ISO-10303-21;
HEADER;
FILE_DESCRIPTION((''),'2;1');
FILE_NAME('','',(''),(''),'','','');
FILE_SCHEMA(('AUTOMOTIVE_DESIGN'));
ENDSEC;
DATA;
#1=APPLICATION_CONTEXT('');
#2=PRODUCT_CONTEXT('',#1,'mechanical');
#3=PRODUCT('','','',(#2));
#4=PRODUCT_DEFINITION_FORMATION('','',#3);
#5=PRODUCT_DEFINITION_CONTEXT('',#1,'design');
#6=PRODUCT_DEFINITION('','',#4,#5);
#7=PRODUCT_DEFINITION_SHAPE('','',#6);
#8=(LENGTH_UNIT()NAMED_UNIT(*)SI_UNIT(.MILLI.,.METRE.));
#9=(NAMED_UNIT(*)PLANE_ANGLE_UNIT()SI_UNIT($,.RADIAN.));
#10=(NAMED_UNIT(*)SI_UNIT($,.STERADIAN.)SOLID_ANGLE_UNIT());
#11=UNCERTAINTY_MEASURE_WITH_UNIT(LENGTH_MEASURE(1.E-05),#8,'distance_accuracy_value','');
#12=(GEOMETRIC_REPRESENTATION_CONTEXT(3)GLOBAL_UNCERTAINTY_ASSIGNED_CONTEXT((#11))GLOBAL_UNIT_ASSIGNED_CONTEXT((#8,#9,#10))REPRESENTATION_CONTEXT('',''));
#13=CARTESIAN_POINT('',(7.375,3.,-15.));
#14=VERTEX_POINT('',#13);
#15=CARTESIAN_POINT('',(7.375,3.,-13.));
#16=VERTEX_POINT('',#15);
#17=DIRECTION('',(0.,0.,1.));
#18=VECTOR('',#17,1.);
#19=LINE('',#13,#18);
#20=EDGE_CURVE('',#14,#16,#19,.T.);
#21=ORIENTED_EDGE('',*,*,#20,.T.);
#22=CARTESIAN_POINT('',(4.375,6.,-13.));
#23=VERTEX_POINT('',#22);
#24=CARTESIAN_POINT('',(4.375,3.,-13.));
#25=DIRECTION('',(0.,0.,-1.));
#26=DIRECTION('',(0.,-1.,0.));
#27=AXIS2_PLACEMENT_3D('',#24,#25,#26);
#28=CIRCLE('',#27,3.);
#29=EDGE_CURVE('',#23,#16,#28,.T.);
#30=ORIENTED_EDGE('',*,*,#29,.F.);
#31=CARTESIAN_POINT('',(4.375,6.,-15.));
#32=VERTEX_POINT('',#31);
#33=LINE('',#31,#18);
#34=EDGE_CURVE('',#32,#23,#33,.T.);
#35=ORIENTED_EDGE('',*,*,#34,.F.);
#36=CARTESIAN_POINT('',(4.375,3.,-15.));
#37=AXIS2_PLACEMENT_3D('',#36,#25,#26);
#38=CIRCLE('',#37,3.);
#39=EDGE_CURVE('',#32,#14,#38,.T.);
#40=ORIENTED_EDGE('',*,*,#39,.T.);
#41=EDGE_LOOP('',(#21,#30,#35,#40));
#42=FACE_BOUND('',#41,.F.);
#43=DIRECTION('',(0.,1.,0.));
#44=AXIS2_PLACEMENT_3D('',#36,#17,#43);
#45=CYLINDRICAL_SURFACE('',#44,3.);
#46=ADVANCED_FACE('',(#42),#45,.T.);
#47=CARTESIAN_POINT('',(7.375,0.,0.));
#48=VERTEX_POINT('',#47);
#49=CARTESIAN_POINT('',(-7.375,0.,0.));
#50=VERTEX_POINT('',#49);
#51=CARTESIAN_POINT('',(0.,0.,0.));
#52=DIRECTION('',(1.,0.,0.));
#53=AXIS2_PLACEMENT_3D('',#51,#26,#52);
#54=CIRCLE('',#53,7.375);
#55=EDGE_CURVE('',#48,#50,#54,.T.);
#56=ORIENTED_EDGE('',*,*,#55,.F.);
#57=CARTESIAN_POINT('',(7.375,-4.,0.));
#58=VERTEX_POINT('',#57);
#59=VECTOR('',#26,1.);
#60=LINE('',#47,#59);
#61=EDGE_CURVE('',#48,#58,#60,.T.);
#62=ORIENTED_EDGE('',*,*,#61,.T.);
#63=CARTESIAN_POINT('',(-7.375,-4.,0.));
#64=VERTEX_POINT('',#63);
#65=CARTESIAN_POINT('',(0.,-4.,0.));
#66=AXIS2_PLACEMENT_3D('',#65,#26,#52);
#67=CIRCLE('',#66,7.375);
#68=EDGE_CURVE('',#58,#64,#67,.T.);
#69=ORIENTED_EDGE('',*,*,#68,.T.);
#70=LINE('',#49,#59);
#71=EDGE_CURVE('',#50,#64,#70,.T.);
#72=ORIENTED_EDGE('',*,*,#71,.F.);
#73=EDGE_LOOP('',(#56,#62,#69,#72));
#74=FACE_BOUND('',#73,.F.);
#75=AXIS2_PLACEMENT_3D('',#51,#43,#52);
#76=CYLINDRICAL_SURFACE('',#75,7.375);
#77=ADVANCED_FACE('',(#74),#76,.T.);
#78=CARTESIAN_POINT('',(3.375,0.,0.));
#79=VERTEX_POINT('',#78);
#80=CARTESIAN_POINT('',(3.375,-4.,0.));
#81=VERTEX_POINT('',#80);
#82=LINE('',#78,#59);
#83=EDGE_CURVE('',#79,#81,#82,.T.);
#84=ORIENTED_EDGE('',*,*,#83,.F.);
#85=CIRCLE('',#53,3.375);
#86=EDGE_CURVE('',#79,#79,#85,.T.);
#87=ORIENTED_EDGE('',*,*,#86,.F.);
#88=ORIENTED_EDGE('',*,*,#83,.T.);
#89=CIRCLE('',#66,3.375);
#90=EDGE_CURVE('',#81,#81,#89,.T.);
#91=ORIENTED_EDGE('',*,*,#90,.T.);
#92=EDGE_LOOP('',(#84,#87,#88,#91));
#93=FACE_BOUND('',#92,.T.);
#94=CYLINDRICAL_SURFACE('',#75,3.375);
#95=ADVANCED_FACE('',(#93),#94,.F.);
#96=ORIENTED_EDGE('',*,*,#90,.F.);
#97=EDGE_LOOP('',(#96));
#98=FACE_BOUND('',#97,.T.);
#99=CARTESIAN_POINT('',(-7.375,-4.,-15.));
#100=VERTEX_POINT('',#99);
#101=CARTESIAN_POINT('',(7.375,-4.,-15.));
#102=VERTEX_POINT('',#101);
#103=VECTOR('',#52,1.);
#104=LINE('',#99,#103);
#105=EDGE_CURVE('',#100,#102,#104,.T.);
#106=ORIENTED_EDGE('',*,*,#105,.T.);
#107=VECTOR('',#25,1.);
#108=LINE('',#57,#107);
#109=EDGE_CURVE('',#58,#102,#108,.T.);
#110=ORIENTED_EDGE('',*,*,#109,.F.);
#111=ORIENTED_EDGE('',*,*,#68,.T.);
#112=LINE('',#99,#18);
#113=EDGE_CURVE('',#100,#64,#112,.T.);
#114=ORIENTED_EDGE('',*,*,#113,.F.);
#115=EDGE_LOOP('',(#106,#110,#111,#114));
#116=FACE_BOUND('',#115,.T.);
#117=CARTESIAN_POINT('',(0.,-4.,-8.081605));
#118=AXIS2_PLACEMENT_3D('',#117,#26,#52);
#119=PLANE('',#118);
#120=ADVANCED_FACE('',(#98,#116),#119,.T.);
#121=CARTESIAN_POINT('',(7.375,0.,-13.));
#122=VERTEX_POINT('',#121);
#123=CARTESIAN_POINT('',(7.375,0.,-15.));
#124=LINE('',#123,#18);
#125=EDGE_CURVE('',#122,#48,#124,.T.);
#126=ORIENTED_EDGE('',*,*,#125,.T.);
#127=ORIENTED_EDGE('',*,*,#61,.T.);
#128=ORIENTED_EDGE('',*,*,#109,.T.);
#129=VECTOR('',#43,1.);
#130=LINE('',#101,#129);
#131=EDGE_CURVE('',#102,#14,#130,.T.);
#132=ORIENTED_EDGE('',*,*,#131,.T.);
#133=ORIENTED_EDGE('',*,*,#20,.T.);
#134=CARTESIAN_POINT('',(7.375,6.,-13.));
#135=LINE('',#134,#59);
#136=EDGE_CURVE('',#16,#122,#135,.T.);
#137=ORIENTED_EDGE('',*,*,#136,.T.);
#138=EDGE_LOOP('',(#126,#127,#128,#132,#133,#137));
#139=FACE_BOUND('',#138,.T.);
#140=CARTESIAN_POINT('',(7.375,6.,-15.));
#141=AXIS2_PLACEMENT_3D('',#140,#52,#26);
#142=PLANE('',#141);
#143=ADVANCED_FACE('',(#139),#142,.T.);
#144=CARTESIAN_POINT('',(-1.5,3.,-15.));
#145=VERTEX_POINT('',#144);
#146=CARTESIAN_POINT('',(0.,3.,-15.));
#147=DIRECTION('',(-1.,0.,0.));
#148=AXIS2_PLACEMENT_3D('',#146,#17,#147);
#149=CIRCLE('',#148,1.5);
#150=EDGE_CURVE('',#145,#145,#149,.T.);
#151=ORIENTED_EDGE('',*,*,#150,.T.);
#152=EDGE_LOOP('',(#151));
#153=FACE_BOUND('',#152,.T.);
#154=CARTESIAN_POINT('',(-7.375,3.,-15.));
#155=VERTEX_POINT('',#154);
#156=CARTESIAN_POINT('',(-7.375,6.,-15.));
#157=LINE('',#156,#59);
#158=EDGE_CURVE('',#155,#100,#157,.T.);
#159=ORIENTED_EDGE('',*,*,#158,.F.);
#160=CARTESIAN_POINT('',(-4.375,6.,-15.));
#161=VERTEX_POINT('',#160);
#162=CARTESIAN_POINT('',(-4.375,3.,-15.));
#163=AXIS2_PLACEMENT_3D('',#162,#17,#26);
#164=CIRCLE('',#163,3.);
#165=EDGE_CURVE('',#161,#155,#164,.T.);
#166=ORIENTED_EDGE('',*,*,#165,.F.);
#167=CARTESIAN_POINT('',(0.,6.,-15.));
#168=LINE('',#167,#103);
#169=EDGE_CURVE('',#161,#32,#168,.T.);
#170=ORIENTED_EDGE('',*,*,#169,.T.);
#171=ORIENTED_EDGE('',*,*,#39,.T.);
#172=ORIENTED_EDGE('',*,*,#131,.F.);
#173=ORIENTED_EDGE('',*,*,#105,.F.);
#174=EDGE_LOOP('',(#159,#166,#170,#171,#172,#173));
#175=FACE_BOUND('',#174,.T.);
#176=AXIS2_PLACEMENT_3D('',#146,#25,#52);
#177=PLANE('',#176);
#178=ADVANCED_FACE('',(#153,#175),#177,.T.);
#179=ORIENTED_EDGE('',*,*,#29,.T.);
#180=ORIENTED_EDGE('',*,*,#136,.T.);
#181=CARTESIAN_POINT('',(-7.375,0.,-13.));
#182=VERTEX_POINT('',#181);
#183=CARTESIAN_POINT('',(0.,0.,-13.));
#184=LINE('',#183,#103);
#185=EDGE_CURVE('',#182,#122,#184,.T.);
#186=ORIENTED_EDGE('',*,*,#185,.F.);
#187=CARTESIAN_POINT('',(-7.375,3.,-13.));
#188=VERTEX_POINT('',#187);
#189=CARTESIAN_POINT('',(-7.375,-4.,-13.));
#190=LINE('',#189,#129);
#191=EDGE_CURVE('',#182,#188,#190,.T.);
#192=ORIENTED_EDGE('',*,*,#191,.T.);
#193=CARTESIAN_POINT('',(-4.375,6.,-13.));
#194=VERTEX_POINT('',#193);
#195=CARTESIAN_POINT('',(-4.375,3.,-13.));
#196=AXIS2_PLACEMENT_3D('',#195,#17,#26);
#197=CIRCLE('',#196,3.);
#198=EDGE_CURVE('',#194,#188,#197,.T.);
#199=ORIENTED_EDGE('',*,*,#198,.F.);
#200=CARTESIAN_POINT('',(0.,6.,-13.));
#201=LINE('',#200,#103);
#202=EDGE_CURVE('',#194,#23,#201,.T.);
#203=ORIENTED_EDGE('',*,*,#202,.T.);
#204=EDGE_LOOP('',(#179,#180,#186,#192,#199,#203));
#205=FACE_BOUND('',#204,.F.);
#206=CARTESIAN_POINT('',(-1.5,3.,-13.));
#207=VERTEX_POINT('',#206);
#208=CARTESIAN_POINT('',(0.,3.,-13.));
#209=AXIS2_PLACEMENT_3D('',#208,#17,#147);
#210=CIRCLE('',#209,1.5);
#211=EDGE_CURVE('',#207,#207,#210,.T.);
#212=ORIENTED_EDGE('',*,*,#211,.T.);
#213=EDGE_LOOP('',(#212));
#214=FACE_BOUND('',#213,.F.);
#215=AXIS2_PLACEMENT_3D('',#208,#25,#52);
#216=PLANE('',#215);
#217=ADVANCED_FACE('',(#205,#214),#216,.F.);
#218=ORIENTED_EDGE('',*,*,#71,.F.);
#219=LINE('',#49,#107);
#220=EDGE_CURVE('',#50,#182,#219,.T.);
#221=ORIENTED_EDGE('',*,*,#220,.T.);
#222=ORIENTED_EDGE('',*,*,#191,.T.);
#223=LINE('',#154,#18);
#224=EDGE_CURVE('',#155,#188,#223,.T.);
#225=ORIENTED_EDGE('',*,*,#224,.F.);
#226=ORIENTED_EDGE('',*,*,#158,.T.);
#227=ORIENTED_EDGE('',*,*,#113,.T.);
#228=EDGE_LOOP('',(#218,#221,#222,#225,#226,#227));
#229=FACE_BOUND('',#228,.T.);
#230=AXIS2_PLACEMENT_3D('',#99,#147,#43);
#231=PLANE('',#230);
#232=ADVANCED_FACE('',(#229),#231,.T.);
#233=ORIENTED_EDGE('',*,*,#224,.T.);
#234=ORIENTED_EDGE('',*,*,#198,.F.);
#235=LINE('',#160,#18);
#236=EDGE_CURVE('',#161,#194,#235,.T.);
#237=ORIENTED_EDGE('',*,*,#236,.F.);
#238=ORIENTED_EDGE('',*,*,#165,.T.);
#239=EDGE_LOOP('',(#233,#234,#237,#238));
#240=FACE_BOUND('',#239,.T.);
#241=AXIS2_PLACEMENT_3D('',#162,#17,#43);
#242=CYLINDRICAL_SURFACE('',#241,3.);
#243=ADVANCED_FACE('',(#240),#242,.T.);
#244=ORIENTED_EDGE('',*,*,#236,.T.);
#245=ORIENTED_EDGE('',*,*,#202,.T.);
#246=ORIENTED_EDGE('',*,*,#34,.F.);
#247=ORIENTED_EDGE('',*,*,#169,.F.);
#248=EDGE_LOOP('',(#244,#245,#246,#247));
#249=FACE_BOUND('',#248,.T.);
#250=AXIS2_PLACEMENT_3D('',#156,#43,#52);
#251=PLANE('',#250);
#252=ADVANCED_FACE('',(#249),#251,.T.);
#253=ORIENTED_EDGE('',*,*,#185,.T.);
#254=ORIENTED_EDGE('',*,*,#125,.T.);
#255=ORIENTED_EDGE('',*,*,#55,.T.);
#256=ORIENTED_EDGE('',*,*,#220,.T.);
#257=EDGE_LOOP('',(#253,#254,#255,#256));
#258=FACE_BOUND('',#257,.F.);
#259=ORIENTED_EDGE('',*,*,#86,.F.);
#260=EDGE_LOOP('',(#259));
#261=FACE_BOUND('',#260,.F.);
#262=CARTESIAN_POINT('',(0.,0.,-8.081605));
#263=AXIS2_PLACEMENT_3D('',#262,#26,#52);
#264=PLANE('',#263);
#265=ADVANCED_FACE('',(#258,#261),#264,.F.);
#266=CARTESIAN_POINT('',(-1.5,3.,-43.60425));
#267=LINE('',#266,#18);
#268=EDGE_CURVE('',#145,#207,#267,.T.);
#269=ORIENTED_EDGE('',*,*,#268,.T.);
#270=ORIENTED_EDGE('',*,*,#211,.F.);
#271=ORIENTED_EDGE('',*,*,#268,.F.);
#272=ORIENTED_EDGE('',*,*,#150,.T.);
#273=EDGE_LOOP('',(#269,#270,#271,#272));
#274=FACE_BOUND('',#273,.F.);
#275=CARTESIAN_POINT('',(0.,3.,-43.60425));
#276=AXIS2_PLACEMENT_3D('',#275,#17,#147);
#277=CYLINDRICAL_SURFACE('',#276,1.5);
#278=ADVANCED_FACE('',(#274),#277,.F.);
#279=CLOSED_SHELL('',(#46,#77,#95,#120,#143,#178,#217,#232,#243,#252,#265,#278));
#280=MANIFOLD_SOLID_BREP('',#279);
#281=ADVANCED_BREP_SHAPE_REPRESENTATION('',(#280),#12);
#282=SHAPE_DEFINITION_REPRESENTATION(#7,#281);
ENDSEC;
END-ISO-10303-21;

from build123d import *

# Parameters (mm, degrees)
F0_R     = 3.375
F1_DEPTH = 4
F2_W     = 14.75
F2_H     = 6
F2_H_2   = 4
F3_DEPTH = 2
F4_R     = 3
F5_D     = 3


# Not quite as in the source:
# - a feature names something its author has since deleted; it is built from what else it names


with BuildPart() as f1:
    # F0 (on Front) → F1 (new body)
    with BuildSketch(Plane.XZ):
        with BuildLine():
            Line((7.375, -15), (7.375, 0))
            ThreePointArc((7.375, 0), (0, -7.375), (-7.375, 0))
            Line((-7.375, 0), (-7.375, -15))
            Line((-7.375, -15), (7.375, -15))
        make_face()
        with BuildLine():
            ThreePointArc((-7.375, 0), (0, -7.375), (7.375, 0))
            ThreePointArc((7.375, 0), (0, 7.375), (-7.375, 0))
        make_face()
        Circle(F0_R, mode=Mode.SUBTRACT)
    extrude(amount=F1_DEPTH)

    # F2 (on face) → F3 (join)
    with BuildSketch(Plane(origin=(0, 0, -15), x_dir=(1, 0, 0), z_dir=(0, 0, -1))):
        with Locations((0, -3)):
            Rectangle(F2_W, F2_H)
        with Locations((0, 2)):
            Rectangle(F2_W, F2_H_2)
    extrude(amount=-F3_DEPTH)

    # F4
    f4_edges = [f1.edges().sort_by_distance(p)[0] for p in [
        (-7.375, 6, -14),
        (7.375, 6, -14),
    ]]
    fillet(f4_edges, radius=F4_R)

    # F5 (through all)
    with Locations(Plane(origin=(0, 0, -15), x_dir=(1, 0, 0), z_dir=(0, 0, -1))):
        with Locations((0, -3)):
            Hole(F5_D / 2)


solid = f1.part
